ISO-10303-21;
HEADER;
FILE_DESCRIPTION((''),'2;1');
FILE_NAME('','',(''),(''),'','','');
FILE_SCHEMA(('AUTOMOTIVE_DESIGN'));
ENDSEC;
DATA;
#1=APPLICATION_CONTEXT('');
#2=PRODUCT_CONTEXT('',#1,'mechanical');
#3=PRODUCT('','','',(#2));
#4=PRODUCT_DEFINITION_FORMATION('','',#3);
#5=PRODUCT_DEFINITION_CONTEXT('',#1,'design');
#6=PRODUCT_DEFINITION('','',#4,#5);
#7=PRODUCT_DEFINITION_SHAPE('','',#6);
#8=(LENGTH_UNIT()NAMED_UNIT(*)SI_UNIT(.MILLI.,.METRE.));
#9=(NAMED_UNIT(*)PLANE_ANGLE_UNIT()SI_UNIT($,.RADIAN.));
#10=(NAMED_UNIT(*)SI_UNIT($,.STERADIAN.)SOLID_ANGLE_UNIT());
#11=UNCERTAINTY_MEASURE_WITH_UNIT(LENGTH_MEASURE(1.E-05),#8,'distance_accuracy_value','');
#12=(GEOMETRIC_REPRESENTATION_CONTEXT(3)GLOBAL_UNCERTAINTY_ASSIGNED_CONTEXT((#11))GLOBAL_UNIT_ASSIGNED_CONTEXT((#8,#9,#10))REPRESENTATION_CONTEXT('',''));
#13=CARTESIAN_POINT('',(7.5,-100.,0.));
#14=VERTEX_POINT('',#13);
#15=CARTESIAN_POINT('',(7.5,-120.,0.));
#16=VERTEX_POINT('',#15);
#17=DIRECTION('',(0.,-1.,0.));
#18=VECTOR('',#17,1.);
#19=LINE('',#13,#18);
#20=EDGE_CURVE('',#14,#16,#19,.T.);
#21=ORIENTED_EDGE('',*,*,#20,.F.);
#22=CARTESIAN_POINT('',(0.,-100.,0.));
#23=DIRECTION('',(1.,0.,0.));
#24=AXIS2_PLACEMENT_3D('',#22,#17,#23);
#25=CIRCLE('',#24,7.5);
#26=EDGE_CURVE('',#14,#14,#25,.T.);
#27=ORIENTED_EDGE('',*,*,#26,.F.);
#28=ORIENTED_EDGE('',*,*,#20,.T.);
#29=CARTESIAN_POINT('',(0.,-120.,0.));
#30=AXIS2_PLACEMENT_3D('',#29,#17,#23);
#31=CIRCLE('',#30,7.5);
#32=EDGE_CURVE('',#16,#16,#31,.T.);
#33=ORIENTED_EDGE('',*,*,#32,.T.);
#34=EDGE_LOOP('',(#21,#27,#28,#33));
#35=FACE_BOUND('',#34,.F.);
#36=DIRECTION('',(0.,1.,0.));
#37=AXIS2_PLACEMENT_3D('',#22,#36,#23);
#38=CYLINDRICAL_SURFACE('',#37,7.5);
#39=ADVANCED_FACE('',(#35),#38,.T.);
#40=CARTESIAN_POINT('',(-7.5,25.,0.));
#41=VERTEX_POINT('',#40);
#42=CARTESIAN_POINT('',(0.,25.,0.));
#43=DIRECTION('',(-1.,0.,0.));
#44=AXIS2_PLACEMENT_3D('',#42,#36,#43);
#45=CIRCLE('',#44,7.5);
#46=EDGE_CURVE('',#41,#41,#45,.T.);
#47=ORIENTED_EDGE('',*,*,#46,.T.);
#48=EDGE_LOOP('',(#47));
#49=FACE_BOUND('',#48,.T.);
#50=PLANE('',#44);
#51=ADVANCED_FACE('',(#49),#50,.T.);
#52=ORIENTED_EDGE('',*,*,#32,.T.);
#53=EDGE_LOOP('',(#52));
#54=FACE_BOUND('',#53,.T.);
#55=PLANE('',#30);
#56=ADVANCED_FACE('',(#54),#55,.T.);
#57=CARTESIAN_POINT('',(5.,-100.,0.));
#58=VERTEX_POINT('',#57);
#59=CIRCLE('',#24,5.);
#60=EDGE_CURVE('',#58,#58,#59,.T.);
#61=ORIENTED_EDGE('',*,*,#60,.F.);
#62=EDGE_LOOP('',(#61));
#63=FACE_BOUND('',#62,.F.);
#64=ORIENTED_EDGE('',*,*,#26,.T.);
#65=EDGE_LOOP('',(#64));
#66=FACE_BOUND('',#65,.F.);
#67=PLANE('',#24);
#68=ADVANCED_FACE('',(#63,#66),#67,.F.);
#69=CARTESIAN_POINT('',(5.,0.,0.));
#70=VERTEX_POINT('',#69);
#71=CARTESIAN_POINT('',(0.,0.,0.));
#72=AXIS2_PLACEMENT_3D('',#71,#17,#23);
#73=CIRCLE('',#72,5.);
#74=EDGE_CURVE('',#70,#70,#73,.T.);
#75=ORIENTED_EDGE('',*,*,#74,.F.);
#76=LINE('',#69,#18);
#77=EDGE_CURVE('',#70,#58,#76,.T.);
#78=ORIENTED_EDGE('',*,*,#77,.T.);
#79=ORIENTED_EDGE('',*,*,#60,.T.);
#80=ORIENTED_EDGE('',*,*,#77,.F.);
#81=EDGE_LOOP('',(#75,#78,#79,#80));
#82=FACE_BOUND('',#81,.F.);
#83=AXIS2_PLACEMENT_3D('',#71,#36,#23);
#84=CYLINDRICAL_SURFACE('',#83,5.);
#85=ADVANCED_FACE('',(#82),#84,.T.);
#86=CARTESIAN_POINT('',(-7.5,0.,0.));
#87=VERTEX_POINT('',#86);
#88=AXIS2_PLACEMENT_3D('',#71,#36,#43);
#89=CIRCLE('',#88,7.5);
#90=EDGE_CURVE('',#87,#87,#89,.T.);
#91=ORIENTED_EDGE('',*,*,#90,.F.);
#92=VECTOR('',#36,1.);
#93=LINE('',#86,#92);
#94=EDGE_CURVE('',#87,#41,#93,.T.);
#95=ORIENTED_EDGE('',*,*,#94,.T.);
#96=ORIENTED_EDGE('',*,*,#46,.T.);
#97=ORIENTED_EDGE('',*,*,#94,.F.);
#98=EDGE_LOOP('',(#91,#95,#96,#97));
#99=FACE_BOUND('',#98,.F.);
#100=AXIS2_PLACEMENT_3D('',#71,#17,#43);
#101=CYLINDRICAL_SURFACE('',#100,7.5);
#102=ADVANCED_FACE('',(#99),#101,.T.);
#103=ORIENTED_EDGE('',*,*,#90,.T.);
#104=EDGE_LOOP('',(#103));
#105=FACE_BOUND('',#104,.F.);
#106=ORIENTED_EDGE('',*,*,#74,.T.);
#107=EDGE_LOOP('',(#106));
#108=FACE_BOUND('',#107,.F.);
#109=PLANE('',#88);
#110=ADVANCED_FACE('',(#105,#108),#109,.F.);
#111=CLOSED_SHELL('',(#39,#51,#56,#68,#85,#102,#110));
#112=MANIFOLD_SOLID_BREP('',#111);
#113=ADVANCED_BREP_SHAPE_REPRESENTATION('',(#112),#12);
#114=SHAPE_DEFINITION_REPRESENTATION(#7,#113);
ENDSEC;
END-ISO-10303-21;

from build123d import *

# Parameters (mm, degrees)
F0_R     = 5
F1_DEPTH = 100
F2_R     = 7.5
F2_R_2   = 5
F3_DEPTH = 20
F4_R     = 7.5
F4_R_2   = 5
F5_DEPTH = 25


with BuildPart() as f1:
    # F0 (on Front) → F1 (new body)
    with BuildSketch(Plane.XZ):
        Circle(F0_R)
    extrude(amount=F1_DEPTH)

    # F2 (on face) → F3 (join)
    with BuildSketch(Plane.XZ.offset(100)):
        Circle(F2_R)
        Circle(F2_R_2, mode=Mode.SUBTRACT)
        Circle(F2_R_2)
    extrude(amount=F3_DEPTH)

    # F4 (on face) → F5 (join)
    with BuildSketch(Plane(origin=(0, 0, 0), x_dir=(-1, 0, 0), z_dir=(0, 1, 0))):
        Circle(F4_R)
        Circle(F4_R_2, mode=Mode.SUBTRACT)
        Circle(F4_R_2)
    extrude(amount=F5_DEPTH)


solid = f1.part
